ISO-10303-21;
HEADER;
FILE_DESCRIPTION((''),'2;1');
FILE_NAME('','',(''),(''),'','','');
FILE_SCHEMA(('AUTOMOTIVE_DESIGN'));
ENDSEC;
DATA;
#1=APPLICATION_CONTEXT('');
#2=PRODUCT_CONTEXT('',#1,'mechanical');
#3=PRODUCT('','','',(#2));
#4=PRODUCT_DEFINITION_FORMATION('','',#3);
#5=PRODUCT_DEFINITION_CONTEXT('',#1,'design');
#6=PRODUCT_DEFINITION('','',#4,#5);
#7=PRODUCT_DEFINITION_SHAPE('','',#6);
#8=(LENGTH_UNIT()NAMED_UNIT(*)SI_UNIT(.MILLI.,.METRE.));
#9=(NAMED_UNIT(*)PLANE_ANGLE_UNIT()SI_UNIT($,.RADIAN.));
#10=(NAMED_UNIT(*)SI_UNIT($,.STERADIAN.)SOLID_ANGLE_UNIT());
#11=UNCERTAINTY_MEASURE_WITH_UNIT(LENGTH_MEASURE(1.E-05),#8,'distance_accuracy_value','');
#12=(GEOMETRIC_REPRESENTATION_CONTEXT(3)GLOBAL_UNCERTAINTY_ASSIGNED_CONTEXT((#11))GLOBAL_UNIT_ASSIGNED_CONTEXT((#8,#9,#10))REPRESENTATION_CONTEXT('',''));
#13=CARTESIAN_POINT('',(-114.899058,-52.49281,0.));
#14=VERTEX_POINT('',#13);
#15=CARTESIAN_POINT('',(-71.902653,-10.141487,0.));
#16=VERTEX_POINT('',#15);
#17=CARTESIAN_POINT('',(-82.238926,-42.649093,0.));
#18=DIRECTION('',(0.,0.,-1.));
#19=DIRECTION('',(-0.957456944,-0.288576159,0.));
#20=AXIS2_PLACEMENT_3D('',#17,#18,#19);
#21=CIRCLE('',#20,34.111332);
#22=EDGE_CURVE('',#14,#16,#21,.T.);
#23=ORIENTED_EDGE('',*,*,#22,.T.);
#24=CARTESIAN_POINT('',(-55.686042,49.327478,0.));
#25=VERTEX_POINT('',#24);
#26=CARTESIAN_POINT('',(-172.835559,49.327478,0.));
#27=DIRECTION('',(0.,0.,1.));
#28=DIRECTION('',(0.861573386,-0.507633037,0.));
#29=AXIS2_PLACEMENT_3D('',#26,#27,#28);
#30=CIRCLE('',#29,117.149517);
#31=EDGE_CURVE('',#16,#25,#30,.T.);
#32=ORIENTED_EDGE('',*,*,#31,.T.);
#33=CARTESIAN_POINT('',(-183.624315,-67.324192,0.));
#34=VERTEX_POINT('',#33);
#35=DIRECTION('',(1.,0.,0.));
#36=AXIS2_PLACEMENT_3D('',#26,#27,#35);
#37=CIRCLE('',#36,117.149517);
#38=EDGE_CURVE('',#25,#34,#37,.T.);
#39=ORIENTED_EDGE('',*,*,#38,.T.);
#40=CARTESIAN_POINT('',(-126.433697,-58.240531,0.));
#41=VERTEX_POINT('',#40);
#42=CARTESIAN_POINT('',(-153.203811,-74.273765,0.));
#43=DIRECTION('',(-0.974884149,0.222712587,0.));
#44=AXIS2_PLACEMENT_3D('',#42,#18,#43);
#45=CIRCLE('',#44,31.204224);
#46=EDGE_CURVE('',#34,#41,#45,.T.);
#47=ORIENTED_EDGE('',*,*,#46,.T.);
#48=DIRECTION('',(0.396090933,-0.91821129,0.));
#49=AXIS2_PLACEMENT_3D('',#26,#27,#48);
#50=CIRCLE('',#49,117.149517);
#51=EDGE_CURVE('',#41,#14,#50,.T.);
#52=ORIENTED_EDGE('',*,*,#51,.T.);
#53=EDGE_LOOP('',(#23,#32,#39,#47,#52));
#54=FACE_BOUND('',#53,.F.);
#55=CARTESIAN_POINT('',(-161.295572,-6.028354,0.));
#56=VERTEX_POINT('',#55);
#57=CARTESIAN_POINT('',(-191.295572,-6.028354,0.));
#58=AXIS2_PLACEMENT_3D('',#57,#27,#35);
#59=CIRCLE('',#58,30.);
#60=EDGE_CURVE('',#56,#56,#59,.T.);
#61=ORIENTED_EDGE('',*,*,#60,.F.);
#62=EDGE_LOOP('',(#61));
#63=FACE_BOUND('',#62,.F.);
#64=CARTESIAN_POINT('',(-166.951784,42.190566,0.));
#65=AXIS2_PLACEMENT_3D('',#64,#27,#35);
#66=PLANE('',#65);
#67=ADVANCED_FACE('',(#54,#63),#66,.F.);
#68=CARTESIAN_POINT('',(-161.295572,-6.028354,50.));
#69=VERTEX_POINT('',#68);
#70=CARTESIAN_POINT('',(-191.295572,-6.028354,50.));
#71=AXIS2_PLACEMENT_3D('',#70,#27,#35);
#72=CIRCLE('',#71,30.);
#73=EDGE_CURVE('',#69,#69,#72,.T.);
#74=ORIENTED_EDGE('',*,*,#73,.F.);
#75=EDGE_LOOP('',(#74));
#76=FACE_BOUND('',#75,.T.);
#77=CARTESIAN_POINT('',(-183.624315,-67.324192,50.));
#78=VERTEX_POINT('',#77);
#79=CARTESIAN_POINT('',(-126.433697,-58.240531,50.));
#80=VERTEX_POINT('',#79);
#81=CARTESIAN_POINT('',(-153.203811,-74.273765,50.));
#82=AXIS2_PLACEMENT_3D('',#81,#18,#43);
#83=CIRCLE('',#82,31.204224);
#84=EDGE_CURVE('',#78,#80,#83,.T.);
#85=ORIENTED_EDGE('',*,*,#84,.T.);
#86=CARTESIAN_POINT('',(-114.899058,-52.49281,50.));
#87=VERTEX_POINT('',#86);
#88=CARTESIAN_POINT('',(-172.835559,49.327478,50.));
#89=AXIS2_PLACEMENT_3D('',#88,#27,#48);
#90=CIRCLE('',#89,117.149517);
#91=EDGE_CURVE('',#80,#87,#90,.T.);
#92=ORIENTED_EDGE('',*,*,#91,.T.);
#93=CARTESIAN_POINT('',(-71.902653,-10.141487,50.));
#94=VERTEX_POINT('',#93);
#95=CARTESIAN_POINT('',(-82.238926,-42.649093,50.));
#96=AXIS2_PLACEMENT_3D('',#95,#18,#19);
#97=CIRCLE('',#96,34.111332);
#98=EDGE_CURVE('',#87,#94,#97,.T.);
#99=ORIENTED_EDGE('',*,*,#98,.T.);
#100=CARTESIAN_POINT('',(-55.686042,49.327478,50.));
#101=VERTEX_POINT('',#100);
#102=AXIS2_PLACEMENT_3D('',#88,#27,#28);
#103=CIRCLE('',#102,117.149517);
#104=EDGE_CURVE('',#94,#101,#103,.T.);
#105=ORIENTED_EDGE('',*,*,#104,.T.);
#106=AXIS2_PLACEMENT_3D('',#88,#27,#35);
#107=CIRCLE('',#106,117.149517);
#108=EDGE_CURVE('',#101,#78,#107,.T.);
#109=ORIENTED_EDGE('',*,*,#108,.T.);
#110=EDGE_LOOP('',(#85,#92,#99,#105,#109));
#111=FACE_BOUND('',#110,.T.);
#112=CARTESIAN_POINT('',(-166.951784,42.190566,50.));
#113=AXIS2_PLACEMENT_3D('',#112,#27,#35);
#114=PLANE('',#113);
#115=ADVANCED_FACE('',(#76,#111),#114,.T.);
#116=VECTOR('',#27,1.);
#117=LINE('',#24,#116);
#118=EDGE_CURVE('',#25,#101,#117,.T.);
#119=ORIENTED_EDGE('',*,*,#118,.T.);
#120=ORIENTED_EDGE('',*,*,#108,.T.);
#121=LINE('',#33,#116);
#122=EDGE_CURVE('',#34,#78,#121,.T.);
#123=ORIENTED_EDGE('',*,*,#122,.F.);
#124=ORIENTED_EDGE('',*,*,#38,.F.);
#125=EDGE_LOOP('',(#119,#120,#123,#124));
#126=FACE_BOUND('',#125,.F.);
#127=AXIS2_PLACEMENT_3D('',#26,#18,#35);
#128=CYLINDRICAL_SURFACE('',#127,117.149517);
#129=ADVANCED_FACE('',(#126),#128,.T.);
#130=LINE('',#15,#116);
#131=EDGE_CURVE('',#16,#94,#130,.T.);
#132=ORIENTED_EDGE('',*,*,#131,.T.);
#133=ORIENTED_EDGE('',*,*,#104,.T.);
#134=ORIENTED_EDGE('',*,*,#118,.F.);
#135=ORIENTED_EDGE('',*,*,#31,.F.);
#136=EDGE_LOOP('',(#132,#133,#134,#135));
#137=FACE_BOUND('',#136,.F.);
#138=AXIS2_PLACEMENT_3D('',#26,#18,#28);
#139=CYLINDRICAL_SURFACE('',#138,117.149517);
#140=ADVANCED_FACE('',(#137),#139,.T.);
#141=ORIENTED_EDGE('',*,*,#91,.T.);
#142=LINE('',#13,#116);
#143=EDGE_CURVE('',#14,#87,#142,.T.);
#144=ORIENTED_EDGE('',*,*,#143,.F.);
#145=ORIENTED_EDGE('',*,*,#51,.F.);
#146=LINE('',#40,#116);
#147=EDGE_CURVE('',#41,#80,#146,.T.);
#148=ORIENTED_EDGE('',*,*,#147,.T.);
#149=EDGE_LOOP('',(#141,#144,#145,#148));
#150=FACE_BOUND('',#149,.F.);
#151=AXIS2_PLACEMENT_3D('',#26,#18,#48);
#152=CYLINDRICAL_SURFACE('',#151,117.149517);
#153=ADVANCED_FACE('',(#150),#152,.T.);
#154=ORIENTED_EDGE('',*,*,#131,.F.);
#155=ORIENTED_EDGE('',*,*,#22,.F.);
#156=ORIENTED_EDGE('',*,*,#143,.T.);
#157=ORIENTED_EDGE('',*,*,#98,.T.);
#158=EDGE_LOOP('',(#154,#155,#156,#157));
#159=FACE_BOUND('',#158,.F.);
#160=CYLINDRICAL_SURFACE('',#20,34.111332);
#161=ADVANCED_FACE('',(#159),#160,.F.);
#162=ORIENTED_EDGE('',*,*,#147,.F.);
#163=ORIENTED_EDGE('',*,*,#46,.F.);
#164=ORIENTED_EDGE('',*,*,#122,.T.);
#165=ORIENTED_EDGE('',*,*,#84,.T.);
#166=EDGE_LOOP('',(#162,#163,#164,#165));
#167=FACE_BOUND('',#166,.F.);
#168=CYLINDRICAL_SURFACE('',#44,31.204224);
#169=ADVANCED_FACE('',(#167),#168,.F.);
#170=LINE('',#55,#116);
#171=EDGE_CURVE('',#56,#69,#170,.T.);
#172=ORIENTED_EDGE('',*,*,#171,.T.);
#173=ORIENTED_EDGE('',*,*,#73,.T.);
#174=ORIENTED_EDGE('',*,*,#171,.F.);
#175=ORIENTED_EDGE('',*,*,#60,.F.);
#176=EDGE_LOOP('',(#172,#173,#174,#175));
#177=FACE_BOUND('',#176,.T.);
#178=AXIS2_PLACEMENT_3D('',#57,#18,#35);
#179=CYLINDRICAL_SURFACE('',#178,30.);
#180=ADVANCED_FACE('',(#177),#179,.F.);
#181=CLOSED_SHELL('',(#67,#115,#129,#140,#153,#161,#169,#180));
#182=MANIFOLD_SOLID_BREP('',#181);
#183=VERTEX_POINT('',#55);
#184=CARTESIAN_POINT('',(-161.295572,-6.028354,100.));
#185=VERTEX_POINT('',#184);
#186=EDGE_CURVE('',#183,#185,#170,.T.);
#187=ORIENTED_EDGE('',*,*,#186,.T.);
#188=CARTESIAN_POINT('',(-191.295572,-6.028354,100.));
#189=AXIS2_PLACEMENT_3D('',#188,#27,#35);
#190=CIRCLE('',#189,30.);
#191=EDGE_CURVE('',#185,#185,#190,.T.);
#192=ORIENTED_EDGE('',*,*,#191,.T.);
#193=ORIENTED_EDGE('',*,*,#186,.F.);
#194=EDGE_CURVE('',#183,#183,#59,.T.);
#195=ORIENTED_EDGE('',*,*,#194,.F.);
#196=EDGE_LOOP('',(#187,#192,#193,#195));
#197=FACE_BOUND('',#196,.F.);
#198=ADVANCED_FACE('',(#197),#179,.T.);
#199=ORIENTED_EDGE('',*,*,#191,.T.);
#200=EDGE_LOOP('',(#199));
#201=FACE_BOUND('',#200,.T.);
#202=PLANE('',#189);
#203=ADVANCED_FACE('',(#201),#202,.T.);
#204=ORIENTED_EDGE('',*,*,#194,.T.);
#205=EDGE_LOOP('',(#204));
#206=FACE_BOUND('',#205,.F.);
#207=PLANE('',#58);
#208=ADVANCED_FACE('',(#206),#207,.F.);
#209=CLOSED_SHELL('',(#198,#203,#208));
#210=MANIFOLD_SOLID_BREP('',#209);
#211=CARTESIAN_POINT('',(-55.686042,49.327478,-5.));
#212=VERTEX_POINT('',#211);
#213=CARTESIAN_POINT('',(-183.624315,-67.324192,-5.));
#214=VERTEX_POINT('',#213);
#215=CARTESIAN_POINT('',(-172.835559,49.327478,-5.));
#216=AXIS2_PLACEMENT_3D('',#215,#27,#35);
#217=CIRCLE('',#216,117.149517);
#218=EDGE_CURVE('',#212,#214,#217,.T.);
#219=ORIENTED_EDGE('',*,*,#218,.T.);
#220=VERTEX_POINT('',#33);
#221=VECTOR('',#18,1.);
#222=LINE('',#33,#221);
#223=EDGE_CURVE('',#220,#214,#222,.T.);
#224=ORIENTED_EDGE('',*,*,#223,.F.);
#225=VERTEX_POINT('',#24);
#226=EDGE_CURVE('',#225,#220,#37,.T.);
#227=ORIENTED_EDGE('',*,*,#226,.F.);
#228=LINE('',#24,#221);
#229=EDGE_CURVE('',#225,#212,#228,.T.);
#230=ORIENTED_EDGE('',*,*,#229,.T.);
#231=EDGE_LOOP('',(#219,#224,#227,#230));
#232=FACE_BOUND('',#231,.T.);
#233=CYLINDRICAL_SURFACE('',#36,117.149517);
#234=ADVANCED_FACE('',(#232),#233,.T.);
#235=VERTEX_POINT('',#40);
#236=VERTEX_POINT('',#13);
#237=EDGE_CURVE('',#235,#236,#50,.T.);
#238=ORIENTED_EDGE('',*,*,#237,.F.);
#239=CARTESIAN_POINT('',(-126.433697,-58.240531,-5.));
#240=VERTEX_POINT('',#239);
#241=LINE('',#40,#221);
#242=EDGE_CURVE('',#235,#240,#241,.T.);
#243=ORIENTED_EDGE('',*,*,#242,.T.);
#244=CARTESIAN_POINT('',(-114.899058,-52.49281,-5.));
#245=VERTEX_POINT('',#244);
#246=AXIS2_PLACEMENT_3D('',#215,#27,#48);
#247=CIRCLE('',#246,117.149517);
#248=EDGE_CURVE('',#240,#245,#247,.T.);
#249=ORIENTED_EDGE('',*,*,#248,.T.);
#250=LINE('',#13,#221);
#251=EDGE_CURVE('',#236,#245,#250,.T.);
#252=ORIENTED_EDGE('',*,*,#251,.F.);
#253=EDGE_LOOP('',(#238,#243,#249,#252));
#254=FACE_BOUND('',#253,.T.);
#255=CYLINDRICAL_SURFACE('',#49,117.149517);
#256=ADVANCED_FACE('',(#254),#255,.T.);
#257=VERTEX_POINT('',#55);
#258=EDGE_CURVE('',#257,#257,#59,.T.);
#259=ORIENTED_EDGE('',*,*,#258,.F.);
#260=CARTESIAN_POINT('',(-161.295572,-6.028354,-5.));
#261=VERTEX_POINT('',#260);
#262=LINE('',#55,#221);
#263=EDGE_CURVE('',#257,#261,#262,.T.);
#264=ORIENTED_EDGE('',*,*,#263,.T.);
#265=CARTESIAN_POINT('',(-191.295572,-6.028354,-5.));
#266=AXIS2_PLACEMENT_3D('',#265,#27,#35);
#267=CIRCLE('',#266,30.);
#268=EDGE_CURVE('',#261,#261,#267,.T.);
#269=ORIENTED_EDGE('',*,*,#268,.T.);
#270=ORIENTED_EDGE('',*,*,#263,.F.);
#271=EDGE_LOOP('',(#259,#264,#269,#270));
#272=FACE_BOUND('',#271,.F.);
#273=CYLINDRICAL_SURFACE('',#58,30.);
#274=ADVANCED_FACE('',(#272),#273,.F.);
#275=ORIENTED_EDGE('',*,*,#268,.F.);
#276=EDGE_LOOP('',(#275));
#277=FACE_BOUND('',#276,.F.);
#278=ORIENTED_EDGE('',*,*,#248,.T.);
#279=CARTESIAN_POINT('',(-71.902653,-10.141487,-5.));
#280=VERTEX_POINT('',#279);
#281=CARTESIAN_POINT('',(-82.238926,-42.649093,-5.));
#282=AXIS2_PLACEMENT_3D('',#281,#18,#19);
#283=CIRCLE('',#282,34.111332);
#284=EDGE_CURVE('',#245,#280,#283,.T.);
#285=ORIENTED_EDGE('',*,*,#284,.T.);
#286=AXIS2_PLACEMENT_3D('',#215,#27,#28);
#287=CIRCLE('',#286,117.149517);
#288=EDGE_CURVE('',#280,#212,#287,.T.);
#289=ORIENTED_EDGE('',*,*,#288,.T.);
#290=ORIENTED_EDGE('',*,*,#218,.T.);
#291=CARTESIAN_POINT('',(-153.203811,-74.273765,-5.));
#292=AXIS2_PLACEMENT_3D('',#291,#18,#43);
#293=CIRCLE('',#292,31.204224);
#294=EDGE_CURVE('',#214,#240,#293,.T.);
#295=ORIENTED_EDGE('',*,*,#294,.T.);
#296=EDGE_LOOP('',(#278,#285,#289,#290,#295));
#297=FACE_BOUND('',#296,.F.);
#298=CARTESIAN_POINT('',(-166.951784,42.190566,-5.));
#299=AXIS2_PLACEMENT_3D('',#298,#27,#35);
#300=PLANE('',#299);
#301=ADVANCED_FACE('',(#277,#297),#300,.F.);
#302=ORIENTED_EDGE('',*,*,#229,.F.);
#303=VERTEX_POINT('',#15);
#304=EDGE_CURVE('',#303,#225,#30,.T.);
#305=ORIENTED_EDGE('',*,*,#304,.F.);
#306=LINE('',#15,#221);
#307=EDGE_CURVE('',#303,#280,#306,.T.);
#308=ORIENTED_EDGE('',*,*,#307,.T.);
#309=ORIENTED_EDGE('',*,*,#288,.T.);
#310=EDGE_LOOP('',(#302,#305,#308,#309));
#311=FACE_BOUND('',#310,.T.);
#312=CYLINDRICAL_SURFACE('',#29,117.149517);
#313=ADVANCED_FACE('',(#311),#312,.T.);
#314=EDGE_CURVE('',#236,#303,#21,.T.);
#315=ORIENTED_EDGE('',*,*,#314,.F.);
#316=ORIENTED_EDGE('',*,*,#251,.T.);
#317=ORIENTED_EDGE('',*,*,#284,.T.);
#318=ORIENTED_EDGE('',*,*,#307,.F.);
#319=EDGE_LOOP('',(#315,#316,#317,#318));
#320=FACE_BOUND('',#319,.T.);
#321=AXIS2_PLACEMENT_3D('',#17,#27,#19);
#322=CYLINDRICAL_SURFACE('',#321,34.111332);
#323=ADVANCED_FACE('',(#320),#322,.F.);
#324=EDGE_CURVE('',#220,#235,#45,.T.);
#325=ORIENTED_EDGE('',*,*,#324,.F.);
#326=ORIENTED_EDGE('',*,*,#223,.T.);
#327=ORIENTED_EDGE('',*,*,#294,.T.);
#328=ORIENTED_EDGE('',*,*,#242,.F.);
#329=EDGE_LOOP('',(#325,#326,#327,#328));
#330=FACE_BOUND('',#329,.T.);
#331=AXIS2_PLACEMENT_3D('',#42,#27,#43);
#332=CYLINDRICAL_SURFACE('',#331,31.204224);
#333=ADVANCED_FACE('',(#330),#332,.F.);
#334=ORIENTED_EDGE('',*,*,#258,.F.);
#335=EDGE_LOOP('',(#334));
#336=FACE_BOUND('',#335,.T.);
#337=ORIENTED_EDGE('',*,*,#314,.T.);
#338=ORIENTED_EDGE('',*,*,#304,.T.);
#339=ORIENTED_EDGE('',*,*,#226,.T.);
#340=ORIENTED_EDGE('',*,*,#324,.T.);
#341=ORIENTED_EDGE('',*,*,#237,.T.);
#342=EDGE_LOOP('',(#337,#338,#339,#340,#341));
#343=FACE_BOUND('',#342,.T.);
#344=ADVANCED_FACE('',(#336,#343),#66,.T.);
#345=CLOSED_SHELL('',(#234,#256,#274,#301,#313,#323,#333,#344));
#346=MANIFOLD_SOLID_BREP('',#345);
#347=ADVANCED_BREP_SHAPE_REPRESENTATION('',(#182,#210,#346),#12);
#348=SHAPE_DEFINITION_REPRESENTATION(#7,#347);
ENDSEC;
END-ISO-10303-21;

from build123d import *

# Parameters (mm, degrees)
F0_R     = 30
F1_DEPTH = 50
F2_DEPTH = 5
F4_DEPTH = 100


# Not quite as in the source:
# - a feature of the source that left no trace in its solid (it failed there, or was rolled back) is left out


with BuildPart() as f1:
    # F0 (on Top) → F1 (new body)
    with BuildSketch(Plane.XY):
        with BuildLine():
            ThreePointArc((-114.899057503, -52.4928103005), (-106.1762880018, -18.347124739), (-71.9026529407, -10.1414870467))
            ThreePointArc((-71.9026529407, -10.1414870467), (-59.8128831647, 18.5072886108), (-55.6860420642, 49.3274778128))
            ThreePointArc((-55.6860420642, 49.3274778128), (-251.7662613014, 135.8951011853), (-183.6243150436, -67.3241915816))
            ThreePointArc((-183.6243150436, -67.3241915816), (-158.098661689, -43.4558474163), (-126.4336973653, -58.2405309352))
            ThreePointArc((-126.4336973653, -58.2405309352), (-120.5872807659, -55.5254033818), (-114.899057503, -52.4928103005))
        make_face()
        with Locations((-191.2955716252, -6.0283541679)):
            Circle(F0_R, mode=Mode.SUBTRACT)
    extrude(amount=F1_DEPTH)


with BuildPart() as f2:
    # F2 (new): a face of the model
    f2_faces = [f1.part.faces().sort_by_distance(p)[0] for p in [
        (-173.744285094, 57.9244090181, 0),
    ]]
    extrude(f2_faces, amount=F2_DEPTH)


with BuildPart() as f4:
    # F0 (on Top) → F4 (new body)
    with BuildSketch(Plane.XY):
        with Locations((-191.2955716252, -6.0283541679)):
            Circle(F0_R)
    extrude(amount=F4_DEPTH)


solid = Compound([f1.part, f2.part, f4.part])
